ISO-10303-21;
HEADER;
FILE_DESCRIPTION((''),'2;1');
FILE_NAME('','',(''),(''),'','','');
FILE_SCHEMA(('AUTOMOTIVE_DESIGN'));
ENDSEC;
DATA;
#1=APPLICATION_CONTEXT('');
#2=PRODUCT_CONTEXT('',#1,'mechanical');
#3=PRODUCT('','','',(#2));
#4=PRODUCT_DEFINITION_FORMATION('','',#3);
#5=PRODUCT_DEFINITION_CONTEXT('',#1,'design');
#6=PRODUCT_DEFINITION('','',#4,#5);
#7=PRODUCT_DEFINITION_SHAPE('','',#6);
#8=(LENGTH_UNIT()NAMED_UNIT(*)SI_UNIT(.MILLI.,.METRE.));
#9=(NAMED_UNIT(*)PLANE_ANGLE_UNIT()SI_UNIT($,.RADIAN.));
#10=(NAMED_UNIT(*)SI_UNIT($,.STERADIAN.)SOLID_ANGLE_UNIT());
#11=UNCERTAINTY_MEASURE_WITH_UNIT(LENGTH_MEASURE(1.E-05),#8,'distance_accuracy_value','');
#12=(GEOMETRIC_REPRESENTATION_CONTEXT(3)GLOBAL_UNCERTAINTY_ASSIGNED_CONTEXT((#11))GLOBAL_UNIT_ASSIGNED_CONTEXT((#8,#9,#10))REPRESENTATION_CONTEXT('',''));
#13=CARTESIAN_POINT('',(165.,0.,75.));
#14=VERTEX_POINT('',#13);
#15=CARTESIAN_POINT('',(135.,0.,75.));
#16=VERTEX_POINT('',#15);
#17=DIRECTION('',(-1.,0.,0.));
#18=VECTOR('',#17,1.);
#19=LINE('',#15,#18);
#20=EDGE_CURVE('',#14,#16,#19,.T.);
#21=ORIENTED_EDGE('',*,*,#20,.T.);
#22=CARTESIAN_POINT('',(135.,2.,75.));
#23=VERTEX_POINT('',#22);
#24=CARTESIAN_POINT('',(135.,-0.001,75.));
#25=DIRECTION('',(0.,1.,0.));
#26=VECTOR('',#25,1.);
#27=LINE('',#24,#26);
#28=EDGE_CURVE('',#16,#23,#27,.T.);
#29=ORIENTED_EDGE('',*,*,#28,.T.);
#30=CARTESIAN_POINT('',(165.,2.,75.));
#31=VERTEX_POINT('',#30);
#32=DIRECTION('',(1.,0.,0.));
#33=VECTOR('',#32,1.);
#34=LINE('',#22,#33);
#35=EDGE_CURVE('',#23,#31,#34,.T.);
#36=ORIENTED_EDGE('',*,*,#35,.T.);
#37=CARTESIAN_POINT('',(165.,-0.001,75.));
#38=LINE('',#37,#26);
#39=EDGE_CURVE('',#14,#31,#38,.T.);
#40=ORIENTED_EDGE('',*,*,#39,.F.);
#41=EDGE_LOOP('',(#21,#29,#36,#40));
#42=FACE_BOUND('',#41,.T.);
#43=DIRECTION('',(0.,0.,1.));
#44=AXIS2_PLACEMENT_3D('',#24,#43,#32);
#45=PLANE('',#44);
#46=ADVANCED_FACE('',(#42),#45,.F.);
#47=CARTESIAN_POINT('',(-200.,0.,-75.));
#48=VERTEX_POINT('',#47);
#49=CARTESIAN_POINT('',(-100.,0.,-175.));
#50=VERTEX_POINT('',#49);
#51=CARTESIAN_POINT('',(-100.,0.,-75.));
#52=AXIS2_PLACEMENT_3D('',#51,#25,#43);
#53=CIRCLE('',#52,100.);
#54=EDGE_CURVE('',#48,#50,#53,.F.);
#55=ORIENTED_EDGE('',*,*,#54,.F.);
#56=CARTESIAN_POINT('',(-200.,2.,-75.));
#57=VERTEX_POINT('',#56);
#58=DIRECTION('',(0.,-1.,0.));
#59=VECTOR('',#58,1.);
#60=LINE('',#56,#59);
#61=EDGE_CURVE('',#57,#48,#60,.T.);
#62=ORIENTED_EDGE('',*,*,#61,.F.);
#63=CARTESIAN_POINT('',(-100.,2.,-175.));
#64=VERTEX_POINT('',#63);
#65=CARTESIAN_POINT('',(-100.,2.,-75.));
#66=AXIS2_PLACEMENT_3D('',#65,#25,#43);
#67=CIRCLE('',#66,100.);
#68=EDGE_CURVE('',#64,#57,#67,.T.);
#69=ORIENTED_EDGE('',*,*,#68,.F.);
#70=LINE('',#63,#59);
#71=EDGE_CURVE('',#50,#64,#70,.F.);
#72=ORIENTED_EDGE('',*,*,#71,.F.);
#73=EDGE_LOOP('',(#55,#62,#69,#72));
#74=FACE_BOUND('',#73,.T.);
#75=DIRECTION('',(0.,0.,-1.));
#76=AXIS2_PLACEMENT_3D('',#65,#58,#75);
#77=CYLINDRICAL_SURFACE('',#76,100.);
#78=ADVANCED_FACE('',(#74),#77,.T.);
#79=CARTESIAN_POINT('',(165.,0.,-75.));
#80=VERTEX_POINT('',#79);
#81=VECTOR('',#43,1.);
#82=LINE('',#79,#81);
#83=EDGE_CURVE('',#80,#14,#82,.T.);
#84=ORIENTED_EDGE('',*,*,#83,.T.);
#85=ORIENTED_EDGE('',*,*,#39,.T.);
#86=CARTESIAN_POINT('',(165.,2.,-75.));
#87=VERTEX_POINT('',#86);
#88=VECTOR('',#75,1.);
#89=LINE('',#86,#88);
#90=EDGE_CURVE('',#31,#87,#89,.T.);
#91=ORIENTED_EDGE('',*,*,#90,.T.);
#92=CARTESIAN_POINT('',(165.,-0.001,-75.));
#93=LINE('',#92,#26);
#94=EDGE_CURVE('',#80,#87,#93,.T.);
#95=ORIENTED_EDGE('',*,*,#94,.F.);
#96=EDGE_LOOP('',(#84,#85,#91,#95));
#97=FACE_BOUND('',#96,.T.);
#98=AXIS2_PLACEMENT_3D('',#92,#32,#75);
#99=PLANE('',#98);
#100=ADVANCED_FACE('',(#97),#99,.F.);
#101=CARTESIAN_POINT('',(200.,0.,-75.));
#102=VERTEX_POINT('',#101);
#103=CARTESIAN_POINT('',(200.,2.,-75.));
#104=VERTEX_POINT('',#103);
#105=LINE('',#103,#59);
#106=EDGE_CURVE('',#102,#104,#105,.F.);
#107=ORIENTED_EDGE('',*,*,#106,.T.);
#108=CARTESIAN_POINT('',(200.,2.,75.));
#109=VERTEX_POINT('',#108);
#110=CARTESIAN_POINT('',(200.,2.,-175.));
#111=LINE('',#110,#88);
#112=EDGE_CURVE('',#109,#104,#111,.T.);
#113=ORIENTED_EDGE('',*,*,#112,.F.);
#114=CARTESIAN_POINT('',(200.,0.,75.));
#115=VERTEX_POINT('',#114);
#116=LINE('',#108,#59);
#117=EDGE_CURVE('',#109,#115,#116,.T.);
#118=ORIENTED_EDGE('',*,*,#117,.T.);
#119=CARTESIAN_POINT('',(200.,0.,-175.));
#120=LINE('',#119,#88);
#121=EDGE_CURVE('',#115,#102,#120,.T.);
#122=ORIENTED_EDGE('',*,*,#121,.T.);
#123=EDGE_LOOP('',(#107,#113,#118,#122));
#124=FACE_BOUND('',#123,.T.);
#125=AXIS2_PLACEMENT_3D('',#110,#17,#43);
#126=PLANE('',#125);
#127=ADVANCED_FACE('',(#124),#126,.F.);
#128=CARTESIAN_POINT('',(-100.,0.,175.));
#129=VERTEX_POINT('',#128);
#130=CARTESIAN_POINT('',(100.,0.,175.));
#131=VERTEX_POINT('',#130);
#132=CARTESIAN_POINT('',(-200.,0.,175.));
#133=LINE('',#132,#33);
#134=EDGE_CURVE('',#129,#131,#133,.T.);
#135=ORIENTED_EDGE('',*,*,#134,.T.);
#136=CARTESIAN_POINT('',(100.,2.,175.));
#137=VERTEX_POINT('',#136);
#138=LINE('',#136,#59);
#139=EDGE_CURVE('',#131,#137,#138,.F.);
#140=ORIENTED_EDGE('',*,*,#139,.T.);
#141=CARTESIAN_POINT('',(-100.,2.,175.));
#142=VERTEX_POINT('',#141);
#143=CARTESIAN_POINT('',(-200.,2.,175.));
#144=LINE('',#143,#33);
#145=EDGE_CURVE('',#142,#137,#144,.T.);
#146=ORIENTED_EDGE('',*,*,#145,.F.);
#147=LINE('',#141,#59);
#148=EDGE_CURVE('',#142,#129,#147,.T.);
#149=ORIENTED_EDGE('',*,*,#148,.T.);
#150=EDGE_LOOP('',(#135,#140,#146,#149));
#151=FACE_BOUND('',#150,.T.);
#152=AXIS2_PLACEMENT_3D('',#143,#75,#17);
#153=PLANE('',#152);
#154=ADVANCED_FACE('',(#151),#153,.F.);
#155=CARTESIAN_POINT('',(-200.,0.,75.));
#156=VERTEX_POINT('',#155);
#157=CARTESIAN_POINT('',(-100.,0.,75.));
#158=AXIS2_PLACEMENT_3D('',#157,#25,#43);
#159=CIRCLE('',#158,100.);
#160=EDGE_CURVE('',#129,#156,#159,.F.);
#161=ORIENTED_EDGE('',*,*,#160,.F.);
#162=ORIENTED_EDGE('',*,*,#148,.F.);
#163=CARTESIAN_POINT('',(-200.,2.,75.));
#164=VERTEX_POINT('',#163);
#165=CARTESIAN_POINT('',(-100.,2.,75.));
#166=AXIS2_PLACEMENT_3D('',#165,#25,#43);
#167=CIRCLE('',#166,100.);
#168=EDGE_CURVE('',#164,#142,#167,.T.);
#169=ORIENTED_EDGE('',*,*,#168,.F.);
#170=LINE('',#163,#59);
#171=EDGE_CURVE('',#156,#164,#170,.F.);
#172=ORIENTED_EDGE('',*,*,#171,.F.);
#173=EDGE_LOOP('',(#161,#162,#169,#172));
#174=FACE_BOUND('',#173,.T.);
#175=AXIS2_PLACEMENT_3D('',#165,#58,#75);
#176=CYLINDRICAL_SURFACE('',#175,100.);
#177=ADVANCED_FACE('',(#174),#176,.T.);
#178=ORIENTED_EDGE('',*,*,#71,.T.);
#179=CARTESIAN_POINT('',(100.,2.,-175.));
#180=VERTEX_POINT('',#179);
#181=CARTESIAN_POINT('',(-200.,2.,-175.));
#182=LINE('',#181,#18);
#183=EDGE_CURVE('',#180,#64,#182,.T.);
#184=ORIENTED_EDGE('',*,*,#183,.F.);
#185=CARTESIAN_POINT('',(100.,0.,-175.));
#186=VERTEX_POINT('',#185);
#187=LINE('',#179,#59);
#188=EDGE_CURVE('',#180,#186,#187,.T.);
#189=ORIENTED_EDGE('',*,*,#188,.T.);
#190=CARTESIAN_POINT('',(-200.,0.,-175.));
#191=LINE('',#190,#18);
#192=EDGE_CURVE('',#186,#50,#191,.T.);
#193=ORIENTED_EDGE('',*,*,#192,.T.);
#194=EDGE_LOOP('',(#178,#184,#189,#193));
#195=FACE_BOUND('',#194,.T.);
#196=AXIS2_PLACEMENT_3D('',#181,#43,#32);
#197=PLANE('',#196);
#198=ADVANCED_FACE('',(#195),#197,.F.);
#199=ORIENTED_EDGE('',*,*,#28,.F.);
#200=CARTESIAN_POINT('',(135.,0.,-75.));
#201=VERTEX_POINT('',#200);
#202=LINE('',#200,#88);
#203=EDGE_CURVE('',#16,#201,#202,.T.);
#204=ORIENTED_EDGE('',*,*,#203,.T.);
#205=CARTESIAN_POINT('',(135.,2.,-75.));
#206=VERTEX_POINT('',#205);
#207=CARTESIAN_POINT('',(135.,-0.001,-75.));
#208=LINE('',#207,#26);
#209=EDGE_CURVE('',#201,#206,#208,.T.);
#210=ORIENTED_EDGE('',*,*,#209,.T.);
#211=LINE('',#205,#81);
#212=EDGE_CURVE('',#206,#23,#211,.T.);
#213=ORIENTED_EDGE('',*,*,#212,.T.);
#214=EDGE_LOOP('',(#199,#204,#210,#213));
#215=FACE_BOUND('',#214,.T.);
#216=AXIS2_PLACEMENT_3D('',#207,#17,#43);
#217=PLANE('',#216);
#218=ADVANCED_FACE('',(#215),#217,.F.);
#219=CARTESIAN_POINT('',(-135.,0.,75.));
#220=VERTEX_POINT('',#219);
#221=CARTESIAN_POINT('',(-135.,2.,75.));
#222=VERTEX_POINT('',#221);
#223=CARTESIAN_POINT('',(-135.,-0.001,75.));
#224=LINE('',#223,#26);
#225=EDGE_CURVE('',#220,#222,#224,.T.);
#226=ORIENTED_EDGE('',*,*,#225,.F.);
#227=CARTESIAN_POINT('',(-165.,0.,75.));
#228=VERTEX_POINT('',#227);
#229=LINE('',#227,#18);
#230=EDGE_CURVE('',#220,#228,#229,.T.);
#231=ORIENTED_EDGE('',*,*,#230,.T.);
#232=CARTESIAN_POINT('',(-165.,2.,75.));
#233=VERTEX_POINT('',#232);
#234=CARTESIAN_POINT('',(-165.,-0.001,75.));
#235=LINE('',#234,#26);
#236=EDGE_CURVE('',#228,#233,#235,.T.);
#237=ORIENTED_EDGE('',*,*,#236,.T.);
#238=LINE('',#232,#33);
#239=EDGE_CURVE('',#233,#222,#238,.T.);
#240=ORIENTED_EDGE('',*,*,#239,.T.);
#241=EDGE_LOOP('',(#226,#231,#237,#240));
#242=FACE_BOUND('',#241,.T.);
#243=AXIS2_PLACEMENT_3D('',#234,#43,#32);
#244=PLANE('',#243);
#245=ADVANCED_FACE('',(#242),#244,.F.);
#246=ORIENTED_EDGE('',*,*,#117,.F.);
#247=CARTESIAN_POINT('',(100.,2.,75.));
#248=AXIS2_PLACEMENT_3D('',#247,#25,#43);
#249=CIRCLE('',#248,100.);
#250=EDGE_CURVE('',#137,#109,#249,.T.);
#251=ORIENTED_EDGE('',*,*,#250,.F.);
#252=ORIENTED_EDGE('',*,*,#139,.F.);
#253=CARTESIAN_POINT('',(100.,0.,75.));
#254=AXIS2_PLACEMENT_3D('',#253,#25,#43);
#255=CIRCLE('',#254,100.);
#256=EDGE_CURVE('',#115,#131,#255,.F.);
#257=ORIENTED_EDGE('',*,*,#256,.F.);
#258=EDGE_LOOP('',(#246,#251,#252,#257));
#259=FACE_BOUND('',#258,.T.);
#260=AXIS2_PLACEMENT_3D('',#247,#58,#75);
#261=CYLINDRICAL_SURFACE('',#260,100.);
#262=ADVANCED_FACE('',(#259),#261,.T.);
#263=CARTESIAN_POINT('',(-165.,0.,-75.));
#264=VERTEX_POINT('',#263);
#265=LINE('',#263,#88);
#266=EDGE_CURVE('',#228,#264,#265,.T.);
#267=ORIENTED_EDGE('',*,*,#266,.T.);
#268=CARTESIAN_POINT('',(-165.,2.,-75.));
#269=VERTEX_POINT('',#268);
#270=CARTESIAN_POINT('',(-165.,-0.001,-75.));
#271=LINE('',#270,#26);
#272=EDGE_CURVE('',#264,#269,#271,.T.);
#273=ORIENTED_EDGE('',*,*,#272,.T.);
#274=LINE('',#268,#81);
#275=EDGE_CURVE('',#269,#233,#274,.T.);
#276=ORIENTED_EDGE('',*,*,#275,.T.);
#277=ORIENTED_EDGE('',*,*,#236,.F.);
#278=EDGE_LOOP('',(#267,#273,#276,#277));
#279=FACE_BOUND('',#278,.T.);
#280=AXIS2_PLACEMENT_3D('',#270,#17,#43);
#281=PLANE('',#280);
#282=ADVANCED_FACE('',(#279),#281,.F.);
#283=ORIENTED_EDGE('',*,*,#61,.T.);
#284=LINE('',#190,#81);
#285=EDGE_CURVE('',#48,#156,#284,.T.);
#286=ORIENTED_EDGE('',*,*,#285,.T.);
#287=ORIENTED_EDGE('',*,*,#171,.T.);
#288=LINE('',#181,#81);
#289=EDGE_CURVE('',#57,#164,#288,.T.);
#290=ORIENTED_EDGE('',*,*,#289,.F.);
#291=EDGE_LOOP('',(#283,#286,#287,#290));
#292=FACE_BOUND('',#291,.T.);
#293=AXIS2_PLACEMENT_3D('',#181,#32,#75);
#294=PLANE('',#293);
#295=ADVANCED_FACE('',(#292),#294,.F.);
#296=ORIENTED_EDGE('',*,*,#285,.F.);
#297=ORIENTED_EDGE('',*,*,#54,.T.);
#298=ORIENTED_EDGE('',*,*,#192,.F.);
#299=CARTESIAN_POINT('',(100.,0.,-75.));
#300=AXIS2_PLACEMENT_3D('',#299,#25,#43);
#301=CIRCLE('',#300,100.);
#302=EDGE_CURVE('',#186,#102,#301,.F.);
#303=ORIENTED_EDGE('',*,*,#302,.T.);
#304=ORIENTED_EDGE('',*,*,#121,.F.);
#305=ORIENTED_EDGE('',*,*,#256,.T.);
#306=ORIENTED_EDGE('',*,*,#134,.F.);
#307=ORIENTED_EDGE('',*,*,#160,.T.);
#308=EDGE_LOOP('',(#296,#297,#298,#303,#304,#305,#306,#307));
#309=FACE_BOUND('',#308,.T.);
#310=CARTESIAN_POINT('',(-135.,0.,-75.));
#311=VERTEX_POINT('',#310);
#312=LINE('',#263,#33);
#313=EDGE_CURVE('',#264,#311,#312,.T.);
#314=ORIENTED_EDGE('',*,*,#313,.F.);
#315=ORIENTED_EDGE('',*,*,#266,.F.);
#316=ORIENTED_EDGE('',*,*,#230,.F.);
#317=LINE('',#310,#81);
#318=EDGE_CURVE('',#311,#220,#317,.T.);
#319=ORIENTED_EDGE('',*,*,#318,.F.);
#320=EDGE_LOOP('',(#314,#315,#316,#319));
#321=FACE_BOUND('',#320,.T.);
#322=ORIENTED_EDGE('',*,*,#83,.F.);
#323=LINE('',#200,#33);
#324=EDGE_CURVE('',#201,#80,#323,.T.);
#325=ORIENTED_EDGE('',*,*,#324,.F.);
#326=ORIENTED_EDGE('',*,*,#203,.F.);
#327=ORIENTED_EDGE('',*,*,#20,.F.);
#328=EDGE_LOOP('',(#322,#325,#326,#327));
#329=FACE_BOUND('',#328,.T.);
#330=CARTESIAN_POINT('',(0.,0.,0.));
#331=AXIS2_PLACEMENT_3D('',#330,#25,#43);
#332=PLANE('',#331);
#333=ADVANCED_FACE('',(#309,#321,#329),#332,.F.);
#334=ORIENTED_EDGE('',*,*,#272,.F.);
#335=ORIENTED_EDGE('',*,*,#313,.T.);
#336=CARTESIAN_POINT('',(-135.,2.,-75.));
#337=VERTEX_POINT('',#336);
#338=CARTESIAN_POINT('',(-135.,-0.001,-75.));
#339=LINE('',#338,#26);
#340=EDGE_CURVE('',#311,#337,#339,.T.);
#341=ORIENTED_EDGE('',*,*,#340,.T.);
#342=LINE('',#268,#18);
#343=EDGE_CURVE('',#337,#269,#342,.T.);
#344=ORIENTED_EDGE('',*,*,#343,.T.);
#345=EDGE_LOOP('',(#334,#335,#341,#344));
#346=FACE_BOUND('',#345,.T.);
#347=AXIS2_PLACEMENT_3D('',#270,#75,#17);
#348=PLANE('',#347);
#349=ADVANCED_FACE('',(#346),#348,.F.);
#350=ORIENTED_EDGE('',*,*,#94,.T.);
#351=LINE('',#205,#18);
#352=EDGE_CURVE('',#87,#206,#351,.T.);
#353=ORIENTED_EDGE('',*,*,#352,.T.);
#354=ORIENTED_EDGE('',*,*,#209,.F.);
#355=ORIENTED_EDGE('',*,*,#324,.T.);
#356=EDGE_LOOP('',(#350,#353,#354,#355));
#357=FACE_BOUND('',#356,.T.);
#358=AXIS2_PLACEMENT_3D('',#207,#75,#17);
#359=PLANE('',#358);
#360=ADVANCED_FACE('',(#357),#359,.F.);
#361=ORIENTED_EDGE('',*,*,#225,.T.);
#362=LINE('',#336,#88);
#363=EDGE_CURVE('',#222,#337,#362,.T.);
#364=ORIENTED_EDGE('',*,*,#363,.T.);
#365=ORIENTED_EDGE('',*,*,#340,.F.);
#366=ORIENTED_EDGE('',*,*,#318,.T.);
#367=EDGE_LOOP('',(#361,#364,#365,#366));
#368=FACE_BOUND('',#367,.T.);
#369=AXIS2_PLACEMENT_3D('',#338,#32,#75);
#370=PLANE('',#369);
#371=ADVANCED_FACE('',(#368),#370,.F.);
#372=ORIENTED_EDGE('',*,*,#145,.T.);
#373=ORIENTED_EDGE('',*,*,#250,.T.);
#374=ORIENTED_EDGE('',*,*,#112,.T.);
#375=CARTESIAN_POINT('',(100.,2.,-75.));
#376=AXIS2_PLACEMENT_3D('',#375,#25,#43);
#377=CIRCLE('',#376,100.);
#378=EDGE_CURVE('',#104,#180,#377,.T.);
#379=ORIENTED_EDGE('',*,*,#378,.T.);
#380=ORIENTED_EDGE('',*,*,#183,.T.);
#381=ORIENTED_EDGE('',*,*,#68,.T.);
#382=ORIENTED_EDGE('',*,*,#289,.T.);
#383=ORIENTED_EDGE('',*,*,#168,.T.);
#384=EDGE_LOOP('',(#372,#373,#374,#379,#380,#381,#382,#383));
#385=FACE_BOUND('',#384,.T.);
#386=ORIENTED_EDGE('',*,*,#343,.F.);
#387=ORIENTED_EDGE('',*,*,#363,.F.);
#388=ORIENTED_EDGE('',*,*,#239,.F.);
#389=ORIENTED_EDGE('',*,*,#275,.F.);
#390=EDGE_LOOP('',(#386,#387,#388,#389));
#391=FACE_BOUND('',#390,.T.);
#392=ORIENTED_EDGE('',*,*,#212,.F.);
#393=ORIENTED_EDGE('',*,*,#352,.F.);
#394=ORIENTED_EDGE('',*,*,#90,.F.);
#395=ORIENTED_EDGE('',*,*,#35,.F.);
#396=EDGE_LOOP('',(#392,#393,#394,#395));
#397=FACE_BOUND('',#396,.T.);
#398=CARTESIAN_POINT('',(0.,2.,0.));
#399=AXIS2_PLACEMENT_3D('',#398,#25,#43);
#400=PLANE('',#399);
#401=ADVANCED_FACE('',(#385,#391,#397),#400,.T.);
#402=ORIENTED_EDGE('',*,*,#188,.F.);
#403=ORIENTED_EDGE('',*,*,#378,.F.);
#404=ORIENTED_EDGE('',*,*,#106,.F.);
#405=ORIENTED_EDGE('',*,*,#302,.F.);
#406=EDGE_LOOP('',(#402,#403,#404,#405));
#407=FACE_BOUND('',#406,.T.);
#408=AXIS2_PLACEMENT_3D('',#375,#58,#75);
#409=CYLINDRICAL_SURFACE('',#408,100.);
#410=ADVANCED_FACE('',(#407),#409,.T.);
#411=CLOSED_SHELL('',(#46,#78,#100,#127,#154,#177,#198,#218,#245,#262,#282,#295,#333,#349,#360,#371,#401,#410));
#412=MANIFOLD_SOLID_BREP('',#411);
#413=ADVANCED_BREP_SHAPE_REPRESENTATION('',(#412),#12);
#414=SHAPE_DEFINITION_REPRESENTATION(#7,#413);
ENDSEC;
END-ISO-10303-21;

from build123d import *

# Parameters (mm, degrees)
SKETCH2_W           = 400
SKETCH2_H           = 350
BASE_FLANGE1_DEPTH  = 2
CUT_EXTRUDE1_REACH  = 267.761
SKETCH7_W           = 30
SKETCH7_H           = 150
BREAK_CORNER1_DEPTH = 2


# Read off the part's stored shape, not the designer's step: Break-Corner1
# Sheet-metal steps are written as plain solids
with BuildPart() as part:
    # Sketch2 → Base-Flange1 (new body)
    with BuildSketch(Plane(origin=(0, 0, 0), x_dir=(1, 0, 0), z_dir=(0, 1, 0))):
        Rectangle(SKETCH2_W, SKETCH2_H)
    extrude(amount=BASE_FLANGE1_DEPTH)

    # Sketch7 → Cut-Extrude1 (cut, up to next)
    with BuildSketch(Plane(origin=(0, 2, 0), x_dir=(1, 0, 0), z_dir=(0, 1, 0)), mode=Mode.PRIVATE) as cut_extrude1_sk1:
        with Locations((-150, 0)):
            Rectangle(SKETCH7_W, SKETCH7_H)
    cut_extrude1_tool1 = extrude(cut_extrude1_sk1.sketch, amount=-CUT_EXTRUDE1_REACH, mode=Mode.PRIVATE) & part.part
    # Sketch7 → Cut-Extrude1 (cut, up to next)
    with BuildSketch(Plane(origin=(0, 2, 0), x_dir=(1, 0, 0), z_dir=(0, 1, 0)), mode=Mode.PRIVATE) as cut_extrude1_sk2:
        with Locations((150, 0)):
            Rectangle(SKETCH7_W, SKETCH7_H)
    cut_extrude1_tool2 = extrude(cut_extrude1_sk2.sketch, amount=-CUT_EXTRUDE1_REACH, mode=Mode.PRIVATE) & part.part
    add(cut_extrude1_tool1.solids().sort_by_distance((-150, 2, 0))[0], mode=Mode.SUBTRACT)
    add(cut_extrude1_tool2.solids().sort_by_distance((150, 2, 0))[0], mode=Mode.SUBTRACT)

    # Break-Corner1 outline → Break-Corner1 (cut)
    with BuildSketch(Plane(origin=(0, 0, 0), x_dir=(1, 0, 0), z_dir=(0, 1, 0))):
        with BuildLine():
            Line((-200, 175), (-200, 75))
            ThreePointArc((-200, 75), (-170.710678119, 145.710678119), (-100, 175))
            Line((-100, 175), (-200, 175))
        make_face()
        with BuildLine():
            ThreePointArc((-100, -175), (-170.710678119, -145.710678119), (-200, -75))
            Line((-200, -75), (-200, -175))
            Line((-200, -175), (-100, -175))
        make_face()
        with BuildLine():
            Line((200, 175), (100, 175))
            ThreePointArc((100, 175), (170.710678119, 145.710678119), (200, 75))
            Line((200, 75), (200, 175))
        make_face()
        with BuildLine():
            ThreePointArc((200, -75), (170.710678119, -145.710678119), (100, -175))
            Line((100, -175), (200, -175))
            Line((200, -175), (200, -75))
        make_face()
    extrude(amount=BREAK_CORNER1_DEPTH, mode=Mode.SUBTRACT)


solid = part.part
